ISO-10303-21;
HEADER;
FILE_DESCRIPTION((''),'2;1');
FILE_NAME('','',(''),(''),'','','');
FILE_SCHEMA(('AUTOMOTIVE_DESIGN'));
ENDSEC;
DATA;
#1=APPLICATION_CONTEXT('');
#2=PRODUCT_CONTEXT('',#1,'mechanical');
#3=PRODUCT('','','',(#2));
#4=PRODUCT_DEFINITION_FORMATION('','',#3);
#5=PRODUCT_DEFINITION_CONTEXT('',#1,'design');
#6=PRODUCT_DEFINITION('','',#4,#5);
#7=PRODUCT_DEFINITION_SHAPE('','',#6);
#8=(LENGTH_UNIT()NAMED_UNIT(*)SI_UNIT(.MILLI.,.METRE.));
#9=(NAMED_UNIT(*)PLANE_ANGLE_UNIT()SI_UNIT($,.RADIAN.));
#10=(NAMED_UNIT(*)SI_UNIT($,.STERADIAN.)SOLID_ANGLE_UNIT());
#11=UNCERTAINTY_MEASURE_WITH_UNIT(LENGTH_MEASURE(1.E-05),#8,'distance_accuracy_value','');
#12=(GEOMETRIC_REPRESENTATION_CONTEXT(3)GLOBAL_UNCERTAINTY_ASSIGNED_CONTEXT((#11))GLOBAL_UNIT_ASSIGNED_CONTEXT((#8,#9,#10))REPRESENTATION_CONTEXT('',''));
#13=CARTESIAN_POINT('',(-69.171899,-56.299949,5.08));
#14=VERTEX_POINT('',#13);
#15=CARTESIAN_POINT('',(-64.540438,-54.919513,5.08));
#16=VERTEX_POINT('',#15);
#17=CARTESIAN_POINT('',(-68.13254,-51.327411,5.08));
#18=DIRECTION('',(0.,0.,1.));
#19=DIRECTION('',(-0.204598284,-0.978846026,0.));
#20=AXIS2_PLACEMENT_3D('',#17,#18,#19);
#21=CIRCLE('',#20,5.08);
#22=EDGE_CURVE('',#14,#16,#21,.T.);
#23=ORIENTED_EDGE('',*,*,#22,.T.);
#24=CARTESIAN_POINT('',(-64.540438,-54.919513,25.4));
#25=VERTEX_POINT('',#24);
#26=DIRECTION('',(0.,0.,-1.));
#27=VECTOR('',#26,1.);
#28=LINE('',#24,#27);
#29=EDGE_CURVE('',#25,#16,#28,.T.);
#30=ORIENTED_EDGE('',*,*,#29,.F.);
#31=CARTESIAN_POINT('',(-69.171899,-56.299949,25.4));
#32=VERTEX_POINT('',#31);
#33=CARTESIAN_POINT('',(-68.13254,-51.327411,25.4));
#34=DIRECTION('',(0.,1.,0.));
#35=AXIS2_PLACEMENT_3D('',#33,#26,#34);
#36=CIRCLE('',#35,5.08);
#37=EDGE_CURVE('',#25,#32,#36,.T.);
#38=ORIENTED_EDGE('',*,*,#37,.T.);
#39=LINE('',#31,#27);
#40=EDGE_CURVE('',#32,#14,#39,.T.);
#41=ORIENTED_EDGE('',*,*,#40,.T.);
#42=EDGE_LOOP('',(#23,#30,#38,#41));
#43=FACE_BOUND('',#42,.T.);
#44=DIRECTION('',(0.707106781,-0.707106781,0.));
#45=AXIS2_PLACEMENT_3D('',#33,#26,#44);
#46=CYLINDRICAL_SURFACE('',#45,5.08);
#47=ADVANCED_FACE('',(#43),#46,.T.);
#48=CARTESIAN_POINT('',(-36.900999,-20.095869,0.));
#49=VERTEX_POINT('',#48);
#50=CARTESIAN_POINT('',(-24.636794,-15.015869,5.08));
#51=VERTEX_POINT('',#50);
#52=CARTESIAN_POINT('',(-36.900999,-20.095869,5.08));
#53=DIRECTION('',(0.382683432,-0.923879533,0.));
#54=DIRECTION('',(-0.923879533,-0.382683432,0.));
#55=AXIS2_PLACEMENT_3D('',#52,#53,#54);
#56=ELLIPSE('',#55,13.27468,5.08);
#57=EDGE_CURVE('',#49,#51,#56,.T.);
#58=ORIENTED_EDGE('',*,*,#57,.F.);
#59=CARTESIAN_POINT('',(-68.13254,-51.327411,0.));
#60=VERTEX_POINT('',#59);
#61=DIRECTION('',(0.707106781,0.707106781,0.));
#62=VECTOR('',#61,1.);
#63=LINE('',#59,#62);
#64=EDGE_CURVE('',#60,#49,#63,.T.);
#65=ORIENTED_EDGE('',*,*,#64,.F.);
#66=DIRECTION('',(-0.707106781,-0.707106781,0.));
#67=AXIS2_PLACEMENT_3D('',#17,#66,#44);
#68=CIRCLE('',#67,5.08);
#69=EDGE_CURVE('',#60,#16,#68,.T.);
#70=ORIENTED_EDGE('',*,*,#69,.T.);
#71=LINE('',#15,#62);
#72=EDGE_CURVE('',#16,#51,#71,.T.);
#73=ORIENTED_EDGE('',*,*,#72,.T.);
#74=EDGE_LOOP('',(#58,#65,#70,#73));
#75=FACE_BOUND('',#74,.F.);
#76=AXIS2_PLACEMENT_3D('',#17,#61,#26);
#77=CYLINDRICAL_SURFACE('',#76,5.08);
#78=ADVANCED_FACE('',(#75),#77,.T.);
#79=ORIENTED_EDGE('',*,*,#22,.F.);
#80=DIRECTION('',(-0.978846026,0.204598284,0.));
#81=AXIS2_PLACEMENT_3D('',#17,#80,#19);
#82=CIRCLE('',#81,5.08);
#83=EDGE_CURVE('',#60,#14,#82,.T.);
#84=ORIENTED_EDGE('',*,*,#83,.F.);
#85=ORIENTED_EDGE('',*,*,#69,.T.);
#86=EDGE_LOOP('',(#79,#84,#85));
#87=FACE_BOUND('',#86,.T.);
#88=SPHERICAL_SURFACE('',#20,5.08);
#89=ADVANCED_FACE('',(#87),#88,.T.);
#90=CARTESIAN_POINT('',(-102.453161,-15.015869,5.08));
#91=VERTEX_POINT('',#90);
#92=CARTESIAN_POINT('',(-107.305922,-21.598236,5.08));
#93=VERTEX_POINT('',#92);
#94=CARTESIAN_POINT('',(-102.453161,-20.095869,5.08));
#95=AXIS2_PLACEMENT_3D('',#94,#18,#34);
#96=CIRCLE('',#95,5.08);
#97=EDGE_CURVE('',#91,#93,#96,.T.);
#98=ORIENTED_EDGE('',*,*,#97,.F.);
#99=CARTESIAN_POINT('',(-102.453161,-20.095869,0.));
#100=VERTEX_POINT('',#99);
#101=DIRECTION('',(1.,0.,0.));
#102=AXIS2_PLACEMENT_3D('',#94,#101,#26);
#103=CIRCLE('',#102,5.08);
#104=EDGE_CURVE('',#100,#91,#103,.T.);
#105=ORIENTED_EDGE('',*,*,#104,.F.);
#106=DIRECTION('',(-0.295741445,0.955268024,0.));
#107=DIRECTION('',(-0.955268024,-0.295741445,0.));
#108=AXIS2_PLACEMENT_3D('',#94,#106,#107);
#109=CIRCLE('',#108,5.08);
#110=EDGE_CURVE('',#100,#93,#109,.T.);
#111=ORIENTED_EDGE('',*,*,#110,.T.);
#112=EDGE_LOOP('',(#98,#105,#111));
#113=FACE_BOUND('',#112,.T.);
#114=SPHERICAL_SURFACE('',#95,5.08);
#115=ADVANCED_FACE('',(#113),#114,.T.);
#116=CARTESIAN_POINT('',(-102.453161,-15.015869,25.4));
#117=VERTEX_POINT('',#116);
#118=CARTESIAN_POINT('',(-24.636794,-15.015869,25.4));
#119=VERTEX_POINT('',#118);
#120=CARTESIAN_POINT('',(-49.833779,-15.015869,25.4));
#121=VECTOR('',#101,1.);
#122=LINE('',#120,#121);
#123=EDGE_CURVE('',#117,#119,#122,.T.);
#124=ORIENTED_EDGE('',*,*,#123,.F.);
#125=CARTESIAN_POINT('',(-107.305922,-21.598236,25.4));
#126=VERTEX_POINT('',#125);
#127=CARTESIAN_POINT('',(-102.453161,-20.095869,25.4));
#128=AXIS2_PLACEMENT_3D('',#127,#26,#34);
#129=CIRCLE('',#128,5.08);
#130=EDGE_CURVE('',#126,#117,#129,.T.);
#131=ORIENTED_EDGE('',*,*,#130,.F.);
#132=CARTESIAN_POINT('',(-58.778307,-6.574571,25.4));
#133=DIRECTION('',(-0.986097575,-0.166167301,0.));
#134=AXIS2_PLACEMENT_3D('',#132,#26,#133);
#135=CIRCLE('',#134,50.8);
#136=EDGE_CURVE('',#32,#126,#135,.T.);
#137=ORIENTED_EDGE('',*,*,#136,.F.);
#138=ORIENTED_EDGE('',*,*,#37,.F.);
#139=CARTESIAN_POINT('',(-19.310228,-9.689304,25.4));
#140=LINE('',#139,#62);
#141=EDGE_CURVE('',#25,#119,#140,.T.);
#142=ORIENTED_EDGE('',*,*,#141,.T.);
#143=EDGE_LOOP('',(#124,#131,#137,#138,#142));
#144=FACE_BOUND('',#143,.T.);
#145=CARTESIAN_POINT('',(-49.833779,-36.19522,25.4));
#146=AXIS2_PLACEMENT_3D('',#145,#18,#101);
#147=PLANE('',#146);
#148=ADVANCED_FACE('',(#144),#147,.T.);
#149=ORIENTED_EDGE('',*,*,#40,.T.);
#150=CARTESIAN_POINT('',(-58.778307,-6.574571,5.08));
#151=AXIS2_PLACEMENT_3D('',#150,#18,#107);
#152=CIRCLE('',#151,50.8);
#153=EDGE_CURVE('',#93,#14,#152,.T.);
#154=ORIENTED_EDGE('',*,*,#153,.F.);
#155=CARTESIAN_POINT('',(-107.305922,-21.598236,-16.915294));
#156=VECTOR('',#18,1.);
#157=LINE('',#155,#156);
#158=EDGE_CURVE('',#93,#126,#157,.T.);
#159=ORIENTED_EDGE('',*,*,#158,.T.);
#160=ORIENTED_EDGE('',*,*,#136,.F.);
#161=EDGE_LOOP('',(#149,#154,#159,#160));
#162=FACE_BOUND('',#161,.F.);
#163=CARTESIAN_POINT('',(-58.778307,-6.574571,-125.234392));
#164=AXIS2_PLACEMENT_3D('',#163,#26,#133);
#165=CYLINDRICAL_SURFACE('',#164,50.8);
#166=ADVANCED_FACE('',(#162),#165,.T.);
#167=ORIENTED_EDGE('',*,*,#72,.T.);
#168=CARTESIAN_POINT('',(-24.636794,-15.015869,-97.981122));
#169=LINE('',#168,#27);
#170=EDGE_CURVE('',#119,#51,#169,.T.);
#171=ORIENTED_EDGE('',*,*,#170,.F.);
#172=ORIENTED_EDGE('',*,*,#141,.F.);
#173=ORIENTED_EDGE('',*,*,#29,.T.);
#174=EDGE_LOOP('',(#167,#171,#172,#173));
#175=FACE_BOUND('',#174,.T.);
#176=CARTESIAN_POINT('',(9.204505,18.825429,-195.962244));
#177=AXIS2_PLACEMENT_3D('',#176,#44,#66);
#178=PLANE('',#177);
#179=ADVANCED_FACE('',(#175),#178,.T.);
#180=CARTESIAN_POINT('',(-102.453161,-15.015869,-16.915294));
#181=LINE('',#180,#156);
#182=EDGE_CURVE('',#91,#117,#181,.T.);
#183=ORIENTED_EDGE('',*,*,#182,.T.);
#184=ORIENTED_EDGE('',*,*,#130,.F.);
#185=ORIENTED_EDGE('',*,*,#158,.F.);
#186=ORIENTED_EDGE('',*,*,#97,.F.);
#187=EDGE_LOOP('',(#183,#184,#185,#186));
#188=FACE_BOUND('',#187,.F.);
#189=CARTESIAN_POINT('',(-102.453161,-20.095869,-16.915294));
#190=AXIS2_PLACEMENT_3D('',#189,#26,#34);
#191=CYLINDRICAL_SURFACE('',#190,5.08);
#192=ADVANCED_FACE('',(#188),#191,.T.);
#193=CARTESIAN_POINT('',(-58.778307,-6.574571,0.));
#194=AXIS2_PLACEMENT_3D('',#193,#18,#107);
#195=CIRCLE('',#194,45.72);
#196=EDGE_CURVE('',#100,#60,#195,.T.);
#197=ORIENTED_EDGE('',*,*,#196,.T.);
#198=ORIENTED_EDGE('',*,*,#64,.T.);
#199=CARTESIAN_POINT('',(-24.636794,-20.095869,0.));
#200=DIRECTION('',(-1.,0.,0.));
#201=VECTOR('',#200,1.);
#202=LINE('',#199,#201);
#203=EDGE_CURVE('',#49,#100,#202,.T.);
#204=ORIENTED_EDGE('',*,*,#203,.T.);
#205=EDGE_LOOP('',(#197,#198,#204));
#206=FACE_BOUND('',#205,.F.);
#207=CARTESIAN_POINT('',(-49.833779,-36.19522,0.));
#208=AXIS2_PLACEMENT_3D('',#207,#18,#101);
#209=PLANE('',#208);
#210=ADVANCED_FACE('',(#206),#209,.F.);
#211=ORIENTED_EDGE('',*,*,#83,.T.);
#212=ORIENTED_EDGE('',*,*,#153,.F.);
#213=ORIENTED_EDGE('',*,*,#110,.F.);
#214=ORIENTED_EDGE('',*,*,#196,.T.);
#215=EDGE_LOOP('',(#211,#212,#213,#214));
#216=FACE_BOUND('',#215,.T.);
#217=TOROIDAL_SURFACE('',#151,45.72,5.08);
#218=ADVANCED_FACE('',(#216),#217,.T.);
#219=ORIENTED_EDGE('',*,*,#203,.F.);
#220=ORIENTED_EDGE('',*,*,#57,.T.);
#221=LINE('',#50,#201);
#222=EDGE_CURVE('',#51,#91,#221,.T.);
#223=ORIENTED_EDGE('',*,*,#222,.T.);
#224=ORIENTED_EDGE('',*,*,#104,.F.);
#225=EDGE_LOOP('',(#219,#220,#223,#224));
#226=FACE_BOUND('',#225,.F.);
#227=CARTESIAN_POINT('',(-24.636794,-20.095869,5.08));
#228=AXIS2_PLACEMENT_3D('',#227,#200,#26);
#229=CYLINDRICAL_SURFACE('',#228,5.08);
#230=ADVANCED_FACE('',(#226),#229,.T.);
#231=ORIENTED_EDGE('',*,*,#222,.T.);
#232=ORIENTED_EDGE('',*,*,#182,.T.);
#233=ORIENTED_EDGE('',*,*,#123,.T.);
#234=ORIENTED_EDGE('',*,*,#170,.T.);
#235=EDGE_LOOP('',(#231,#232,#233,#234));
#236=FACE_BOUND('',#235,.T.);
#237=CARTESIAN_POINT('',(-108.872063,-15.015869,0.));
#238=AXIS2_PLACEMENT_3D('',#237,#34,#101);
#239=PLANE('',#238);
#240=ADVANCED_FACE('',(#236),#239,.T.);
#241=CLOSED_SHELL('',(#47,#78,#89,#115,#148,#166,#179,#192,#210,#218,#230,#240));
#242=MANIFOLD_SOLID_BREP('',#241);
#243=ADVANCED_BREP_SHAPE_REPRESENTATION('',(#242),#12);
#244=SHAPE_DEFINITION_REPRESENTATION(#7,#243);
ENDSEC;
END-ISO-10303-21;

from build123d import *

# Parameters (mm, degrees)
F0_W        = 118.0765684694
F0_H        = 42.3587011173
F1_DEPTH    = 25.4
F2_T1_DEPTH = 275.8687841416
F3_T1_DEPTH = 417.324487366
F4_R        = 5.08
F5_T1_DEPTH = 59.2305880834
F6_R        = 5.08


# Not quite as in the source:
# - a fillet or chamfer that OpenCascade refuses, or shapes differently, is made with other operations: its cross-section is extruded or revolved along the edge and cut away or added


with BuildPart() as f1:
    # F0 (on Top) → F1 (new body)
    with BuildSketch(Plane.XY):
        with Locations((-49.8337792233, -36.1952199601)):
            Rectangle(F0_W, F0_H)
    extrude(amount=F1_DEPTH)

    # F2: fillet of radius 50.8 on 1 edges, made by hand

    # F2_s2 → F2_t1 (cut)
    with BuildSketch(Plane.XY.offset(-125.2343920708)):
        with BuildLine():
            ThreePointArc((-108.872063458, -15.0158694014), (-91.5793890566, -45.3654069575), (-58.7783066297, -57.3745705187))
            Line((-58.7783066297, -57.3745705187), (-108.872063458, -57.3745705187))
            Line((-108.872063458, -57.3745705187), (-108.872063458, -15.0158694014))
        make_face()
    extrude(amount=F2_T1_DEPTH, mode=Mode.SUBTRACT)

    # F3: chamfer of 76.2 on 1 edges, made by hand

    # F3_s2 → F3_t1 (cut)
    with BuildSketch(Plane.XY.offset(-195.962243683)):
        Polygon((9.2045050114, 18.8254294813), (-66.9954949886, -57.3745705187), (9.2045050114, -57.3745705187), align=None)
    extrude(amount=F3_T1_DEPTH, mode=Mode.SUBTRACT)

    # F4
    f4_edges = [f1.edges().sort_by_distance(p)[0] for p in [
        (-66.417785, -56.79686, 12.7),
    ]]
    fillet(f4_edges, radius=F4_R)

    # F5: fillet of radius 5.08 on 1 edges, made by hand

    # F5_s2 → F5_t1 (cut)
    with BuildSketch(Plane.XY.offset(-16.9152940417)):
        with BuildLine():
            ThreePointArc((-102.4531606824, -15.0158694014), (-106.5420738654, -17.081372929), (-107.3059222438, -21.5982359439))
            ThreePointArc((-107.3059222438, -21.5982359439), (-108.1987038654, -18.3331561934), (-108.872063458, -15.0158694014))
            Line((-108.872063458, -15.0158694014), (-102.4531606824, -15.0158694014))
        make_face()
    extrude(amount=F5_T1_DEPTH, mode=Mode.SUBTRACT)

    # F6
    f6_edges = [f1.edges().sort_by_distance(p)[0] for p in [
        (-44.588616, -34.967691, 0),
        (-66.681498, -56.195765, 0),
        (-92.968648, -44.146642, 0),
        (-106.542074, -17.081373, 0),
        (-63.544977, -15.015869, 0),
    ]]
    fillet(f6_edges, radius=F6_R)


solid = f1.part
